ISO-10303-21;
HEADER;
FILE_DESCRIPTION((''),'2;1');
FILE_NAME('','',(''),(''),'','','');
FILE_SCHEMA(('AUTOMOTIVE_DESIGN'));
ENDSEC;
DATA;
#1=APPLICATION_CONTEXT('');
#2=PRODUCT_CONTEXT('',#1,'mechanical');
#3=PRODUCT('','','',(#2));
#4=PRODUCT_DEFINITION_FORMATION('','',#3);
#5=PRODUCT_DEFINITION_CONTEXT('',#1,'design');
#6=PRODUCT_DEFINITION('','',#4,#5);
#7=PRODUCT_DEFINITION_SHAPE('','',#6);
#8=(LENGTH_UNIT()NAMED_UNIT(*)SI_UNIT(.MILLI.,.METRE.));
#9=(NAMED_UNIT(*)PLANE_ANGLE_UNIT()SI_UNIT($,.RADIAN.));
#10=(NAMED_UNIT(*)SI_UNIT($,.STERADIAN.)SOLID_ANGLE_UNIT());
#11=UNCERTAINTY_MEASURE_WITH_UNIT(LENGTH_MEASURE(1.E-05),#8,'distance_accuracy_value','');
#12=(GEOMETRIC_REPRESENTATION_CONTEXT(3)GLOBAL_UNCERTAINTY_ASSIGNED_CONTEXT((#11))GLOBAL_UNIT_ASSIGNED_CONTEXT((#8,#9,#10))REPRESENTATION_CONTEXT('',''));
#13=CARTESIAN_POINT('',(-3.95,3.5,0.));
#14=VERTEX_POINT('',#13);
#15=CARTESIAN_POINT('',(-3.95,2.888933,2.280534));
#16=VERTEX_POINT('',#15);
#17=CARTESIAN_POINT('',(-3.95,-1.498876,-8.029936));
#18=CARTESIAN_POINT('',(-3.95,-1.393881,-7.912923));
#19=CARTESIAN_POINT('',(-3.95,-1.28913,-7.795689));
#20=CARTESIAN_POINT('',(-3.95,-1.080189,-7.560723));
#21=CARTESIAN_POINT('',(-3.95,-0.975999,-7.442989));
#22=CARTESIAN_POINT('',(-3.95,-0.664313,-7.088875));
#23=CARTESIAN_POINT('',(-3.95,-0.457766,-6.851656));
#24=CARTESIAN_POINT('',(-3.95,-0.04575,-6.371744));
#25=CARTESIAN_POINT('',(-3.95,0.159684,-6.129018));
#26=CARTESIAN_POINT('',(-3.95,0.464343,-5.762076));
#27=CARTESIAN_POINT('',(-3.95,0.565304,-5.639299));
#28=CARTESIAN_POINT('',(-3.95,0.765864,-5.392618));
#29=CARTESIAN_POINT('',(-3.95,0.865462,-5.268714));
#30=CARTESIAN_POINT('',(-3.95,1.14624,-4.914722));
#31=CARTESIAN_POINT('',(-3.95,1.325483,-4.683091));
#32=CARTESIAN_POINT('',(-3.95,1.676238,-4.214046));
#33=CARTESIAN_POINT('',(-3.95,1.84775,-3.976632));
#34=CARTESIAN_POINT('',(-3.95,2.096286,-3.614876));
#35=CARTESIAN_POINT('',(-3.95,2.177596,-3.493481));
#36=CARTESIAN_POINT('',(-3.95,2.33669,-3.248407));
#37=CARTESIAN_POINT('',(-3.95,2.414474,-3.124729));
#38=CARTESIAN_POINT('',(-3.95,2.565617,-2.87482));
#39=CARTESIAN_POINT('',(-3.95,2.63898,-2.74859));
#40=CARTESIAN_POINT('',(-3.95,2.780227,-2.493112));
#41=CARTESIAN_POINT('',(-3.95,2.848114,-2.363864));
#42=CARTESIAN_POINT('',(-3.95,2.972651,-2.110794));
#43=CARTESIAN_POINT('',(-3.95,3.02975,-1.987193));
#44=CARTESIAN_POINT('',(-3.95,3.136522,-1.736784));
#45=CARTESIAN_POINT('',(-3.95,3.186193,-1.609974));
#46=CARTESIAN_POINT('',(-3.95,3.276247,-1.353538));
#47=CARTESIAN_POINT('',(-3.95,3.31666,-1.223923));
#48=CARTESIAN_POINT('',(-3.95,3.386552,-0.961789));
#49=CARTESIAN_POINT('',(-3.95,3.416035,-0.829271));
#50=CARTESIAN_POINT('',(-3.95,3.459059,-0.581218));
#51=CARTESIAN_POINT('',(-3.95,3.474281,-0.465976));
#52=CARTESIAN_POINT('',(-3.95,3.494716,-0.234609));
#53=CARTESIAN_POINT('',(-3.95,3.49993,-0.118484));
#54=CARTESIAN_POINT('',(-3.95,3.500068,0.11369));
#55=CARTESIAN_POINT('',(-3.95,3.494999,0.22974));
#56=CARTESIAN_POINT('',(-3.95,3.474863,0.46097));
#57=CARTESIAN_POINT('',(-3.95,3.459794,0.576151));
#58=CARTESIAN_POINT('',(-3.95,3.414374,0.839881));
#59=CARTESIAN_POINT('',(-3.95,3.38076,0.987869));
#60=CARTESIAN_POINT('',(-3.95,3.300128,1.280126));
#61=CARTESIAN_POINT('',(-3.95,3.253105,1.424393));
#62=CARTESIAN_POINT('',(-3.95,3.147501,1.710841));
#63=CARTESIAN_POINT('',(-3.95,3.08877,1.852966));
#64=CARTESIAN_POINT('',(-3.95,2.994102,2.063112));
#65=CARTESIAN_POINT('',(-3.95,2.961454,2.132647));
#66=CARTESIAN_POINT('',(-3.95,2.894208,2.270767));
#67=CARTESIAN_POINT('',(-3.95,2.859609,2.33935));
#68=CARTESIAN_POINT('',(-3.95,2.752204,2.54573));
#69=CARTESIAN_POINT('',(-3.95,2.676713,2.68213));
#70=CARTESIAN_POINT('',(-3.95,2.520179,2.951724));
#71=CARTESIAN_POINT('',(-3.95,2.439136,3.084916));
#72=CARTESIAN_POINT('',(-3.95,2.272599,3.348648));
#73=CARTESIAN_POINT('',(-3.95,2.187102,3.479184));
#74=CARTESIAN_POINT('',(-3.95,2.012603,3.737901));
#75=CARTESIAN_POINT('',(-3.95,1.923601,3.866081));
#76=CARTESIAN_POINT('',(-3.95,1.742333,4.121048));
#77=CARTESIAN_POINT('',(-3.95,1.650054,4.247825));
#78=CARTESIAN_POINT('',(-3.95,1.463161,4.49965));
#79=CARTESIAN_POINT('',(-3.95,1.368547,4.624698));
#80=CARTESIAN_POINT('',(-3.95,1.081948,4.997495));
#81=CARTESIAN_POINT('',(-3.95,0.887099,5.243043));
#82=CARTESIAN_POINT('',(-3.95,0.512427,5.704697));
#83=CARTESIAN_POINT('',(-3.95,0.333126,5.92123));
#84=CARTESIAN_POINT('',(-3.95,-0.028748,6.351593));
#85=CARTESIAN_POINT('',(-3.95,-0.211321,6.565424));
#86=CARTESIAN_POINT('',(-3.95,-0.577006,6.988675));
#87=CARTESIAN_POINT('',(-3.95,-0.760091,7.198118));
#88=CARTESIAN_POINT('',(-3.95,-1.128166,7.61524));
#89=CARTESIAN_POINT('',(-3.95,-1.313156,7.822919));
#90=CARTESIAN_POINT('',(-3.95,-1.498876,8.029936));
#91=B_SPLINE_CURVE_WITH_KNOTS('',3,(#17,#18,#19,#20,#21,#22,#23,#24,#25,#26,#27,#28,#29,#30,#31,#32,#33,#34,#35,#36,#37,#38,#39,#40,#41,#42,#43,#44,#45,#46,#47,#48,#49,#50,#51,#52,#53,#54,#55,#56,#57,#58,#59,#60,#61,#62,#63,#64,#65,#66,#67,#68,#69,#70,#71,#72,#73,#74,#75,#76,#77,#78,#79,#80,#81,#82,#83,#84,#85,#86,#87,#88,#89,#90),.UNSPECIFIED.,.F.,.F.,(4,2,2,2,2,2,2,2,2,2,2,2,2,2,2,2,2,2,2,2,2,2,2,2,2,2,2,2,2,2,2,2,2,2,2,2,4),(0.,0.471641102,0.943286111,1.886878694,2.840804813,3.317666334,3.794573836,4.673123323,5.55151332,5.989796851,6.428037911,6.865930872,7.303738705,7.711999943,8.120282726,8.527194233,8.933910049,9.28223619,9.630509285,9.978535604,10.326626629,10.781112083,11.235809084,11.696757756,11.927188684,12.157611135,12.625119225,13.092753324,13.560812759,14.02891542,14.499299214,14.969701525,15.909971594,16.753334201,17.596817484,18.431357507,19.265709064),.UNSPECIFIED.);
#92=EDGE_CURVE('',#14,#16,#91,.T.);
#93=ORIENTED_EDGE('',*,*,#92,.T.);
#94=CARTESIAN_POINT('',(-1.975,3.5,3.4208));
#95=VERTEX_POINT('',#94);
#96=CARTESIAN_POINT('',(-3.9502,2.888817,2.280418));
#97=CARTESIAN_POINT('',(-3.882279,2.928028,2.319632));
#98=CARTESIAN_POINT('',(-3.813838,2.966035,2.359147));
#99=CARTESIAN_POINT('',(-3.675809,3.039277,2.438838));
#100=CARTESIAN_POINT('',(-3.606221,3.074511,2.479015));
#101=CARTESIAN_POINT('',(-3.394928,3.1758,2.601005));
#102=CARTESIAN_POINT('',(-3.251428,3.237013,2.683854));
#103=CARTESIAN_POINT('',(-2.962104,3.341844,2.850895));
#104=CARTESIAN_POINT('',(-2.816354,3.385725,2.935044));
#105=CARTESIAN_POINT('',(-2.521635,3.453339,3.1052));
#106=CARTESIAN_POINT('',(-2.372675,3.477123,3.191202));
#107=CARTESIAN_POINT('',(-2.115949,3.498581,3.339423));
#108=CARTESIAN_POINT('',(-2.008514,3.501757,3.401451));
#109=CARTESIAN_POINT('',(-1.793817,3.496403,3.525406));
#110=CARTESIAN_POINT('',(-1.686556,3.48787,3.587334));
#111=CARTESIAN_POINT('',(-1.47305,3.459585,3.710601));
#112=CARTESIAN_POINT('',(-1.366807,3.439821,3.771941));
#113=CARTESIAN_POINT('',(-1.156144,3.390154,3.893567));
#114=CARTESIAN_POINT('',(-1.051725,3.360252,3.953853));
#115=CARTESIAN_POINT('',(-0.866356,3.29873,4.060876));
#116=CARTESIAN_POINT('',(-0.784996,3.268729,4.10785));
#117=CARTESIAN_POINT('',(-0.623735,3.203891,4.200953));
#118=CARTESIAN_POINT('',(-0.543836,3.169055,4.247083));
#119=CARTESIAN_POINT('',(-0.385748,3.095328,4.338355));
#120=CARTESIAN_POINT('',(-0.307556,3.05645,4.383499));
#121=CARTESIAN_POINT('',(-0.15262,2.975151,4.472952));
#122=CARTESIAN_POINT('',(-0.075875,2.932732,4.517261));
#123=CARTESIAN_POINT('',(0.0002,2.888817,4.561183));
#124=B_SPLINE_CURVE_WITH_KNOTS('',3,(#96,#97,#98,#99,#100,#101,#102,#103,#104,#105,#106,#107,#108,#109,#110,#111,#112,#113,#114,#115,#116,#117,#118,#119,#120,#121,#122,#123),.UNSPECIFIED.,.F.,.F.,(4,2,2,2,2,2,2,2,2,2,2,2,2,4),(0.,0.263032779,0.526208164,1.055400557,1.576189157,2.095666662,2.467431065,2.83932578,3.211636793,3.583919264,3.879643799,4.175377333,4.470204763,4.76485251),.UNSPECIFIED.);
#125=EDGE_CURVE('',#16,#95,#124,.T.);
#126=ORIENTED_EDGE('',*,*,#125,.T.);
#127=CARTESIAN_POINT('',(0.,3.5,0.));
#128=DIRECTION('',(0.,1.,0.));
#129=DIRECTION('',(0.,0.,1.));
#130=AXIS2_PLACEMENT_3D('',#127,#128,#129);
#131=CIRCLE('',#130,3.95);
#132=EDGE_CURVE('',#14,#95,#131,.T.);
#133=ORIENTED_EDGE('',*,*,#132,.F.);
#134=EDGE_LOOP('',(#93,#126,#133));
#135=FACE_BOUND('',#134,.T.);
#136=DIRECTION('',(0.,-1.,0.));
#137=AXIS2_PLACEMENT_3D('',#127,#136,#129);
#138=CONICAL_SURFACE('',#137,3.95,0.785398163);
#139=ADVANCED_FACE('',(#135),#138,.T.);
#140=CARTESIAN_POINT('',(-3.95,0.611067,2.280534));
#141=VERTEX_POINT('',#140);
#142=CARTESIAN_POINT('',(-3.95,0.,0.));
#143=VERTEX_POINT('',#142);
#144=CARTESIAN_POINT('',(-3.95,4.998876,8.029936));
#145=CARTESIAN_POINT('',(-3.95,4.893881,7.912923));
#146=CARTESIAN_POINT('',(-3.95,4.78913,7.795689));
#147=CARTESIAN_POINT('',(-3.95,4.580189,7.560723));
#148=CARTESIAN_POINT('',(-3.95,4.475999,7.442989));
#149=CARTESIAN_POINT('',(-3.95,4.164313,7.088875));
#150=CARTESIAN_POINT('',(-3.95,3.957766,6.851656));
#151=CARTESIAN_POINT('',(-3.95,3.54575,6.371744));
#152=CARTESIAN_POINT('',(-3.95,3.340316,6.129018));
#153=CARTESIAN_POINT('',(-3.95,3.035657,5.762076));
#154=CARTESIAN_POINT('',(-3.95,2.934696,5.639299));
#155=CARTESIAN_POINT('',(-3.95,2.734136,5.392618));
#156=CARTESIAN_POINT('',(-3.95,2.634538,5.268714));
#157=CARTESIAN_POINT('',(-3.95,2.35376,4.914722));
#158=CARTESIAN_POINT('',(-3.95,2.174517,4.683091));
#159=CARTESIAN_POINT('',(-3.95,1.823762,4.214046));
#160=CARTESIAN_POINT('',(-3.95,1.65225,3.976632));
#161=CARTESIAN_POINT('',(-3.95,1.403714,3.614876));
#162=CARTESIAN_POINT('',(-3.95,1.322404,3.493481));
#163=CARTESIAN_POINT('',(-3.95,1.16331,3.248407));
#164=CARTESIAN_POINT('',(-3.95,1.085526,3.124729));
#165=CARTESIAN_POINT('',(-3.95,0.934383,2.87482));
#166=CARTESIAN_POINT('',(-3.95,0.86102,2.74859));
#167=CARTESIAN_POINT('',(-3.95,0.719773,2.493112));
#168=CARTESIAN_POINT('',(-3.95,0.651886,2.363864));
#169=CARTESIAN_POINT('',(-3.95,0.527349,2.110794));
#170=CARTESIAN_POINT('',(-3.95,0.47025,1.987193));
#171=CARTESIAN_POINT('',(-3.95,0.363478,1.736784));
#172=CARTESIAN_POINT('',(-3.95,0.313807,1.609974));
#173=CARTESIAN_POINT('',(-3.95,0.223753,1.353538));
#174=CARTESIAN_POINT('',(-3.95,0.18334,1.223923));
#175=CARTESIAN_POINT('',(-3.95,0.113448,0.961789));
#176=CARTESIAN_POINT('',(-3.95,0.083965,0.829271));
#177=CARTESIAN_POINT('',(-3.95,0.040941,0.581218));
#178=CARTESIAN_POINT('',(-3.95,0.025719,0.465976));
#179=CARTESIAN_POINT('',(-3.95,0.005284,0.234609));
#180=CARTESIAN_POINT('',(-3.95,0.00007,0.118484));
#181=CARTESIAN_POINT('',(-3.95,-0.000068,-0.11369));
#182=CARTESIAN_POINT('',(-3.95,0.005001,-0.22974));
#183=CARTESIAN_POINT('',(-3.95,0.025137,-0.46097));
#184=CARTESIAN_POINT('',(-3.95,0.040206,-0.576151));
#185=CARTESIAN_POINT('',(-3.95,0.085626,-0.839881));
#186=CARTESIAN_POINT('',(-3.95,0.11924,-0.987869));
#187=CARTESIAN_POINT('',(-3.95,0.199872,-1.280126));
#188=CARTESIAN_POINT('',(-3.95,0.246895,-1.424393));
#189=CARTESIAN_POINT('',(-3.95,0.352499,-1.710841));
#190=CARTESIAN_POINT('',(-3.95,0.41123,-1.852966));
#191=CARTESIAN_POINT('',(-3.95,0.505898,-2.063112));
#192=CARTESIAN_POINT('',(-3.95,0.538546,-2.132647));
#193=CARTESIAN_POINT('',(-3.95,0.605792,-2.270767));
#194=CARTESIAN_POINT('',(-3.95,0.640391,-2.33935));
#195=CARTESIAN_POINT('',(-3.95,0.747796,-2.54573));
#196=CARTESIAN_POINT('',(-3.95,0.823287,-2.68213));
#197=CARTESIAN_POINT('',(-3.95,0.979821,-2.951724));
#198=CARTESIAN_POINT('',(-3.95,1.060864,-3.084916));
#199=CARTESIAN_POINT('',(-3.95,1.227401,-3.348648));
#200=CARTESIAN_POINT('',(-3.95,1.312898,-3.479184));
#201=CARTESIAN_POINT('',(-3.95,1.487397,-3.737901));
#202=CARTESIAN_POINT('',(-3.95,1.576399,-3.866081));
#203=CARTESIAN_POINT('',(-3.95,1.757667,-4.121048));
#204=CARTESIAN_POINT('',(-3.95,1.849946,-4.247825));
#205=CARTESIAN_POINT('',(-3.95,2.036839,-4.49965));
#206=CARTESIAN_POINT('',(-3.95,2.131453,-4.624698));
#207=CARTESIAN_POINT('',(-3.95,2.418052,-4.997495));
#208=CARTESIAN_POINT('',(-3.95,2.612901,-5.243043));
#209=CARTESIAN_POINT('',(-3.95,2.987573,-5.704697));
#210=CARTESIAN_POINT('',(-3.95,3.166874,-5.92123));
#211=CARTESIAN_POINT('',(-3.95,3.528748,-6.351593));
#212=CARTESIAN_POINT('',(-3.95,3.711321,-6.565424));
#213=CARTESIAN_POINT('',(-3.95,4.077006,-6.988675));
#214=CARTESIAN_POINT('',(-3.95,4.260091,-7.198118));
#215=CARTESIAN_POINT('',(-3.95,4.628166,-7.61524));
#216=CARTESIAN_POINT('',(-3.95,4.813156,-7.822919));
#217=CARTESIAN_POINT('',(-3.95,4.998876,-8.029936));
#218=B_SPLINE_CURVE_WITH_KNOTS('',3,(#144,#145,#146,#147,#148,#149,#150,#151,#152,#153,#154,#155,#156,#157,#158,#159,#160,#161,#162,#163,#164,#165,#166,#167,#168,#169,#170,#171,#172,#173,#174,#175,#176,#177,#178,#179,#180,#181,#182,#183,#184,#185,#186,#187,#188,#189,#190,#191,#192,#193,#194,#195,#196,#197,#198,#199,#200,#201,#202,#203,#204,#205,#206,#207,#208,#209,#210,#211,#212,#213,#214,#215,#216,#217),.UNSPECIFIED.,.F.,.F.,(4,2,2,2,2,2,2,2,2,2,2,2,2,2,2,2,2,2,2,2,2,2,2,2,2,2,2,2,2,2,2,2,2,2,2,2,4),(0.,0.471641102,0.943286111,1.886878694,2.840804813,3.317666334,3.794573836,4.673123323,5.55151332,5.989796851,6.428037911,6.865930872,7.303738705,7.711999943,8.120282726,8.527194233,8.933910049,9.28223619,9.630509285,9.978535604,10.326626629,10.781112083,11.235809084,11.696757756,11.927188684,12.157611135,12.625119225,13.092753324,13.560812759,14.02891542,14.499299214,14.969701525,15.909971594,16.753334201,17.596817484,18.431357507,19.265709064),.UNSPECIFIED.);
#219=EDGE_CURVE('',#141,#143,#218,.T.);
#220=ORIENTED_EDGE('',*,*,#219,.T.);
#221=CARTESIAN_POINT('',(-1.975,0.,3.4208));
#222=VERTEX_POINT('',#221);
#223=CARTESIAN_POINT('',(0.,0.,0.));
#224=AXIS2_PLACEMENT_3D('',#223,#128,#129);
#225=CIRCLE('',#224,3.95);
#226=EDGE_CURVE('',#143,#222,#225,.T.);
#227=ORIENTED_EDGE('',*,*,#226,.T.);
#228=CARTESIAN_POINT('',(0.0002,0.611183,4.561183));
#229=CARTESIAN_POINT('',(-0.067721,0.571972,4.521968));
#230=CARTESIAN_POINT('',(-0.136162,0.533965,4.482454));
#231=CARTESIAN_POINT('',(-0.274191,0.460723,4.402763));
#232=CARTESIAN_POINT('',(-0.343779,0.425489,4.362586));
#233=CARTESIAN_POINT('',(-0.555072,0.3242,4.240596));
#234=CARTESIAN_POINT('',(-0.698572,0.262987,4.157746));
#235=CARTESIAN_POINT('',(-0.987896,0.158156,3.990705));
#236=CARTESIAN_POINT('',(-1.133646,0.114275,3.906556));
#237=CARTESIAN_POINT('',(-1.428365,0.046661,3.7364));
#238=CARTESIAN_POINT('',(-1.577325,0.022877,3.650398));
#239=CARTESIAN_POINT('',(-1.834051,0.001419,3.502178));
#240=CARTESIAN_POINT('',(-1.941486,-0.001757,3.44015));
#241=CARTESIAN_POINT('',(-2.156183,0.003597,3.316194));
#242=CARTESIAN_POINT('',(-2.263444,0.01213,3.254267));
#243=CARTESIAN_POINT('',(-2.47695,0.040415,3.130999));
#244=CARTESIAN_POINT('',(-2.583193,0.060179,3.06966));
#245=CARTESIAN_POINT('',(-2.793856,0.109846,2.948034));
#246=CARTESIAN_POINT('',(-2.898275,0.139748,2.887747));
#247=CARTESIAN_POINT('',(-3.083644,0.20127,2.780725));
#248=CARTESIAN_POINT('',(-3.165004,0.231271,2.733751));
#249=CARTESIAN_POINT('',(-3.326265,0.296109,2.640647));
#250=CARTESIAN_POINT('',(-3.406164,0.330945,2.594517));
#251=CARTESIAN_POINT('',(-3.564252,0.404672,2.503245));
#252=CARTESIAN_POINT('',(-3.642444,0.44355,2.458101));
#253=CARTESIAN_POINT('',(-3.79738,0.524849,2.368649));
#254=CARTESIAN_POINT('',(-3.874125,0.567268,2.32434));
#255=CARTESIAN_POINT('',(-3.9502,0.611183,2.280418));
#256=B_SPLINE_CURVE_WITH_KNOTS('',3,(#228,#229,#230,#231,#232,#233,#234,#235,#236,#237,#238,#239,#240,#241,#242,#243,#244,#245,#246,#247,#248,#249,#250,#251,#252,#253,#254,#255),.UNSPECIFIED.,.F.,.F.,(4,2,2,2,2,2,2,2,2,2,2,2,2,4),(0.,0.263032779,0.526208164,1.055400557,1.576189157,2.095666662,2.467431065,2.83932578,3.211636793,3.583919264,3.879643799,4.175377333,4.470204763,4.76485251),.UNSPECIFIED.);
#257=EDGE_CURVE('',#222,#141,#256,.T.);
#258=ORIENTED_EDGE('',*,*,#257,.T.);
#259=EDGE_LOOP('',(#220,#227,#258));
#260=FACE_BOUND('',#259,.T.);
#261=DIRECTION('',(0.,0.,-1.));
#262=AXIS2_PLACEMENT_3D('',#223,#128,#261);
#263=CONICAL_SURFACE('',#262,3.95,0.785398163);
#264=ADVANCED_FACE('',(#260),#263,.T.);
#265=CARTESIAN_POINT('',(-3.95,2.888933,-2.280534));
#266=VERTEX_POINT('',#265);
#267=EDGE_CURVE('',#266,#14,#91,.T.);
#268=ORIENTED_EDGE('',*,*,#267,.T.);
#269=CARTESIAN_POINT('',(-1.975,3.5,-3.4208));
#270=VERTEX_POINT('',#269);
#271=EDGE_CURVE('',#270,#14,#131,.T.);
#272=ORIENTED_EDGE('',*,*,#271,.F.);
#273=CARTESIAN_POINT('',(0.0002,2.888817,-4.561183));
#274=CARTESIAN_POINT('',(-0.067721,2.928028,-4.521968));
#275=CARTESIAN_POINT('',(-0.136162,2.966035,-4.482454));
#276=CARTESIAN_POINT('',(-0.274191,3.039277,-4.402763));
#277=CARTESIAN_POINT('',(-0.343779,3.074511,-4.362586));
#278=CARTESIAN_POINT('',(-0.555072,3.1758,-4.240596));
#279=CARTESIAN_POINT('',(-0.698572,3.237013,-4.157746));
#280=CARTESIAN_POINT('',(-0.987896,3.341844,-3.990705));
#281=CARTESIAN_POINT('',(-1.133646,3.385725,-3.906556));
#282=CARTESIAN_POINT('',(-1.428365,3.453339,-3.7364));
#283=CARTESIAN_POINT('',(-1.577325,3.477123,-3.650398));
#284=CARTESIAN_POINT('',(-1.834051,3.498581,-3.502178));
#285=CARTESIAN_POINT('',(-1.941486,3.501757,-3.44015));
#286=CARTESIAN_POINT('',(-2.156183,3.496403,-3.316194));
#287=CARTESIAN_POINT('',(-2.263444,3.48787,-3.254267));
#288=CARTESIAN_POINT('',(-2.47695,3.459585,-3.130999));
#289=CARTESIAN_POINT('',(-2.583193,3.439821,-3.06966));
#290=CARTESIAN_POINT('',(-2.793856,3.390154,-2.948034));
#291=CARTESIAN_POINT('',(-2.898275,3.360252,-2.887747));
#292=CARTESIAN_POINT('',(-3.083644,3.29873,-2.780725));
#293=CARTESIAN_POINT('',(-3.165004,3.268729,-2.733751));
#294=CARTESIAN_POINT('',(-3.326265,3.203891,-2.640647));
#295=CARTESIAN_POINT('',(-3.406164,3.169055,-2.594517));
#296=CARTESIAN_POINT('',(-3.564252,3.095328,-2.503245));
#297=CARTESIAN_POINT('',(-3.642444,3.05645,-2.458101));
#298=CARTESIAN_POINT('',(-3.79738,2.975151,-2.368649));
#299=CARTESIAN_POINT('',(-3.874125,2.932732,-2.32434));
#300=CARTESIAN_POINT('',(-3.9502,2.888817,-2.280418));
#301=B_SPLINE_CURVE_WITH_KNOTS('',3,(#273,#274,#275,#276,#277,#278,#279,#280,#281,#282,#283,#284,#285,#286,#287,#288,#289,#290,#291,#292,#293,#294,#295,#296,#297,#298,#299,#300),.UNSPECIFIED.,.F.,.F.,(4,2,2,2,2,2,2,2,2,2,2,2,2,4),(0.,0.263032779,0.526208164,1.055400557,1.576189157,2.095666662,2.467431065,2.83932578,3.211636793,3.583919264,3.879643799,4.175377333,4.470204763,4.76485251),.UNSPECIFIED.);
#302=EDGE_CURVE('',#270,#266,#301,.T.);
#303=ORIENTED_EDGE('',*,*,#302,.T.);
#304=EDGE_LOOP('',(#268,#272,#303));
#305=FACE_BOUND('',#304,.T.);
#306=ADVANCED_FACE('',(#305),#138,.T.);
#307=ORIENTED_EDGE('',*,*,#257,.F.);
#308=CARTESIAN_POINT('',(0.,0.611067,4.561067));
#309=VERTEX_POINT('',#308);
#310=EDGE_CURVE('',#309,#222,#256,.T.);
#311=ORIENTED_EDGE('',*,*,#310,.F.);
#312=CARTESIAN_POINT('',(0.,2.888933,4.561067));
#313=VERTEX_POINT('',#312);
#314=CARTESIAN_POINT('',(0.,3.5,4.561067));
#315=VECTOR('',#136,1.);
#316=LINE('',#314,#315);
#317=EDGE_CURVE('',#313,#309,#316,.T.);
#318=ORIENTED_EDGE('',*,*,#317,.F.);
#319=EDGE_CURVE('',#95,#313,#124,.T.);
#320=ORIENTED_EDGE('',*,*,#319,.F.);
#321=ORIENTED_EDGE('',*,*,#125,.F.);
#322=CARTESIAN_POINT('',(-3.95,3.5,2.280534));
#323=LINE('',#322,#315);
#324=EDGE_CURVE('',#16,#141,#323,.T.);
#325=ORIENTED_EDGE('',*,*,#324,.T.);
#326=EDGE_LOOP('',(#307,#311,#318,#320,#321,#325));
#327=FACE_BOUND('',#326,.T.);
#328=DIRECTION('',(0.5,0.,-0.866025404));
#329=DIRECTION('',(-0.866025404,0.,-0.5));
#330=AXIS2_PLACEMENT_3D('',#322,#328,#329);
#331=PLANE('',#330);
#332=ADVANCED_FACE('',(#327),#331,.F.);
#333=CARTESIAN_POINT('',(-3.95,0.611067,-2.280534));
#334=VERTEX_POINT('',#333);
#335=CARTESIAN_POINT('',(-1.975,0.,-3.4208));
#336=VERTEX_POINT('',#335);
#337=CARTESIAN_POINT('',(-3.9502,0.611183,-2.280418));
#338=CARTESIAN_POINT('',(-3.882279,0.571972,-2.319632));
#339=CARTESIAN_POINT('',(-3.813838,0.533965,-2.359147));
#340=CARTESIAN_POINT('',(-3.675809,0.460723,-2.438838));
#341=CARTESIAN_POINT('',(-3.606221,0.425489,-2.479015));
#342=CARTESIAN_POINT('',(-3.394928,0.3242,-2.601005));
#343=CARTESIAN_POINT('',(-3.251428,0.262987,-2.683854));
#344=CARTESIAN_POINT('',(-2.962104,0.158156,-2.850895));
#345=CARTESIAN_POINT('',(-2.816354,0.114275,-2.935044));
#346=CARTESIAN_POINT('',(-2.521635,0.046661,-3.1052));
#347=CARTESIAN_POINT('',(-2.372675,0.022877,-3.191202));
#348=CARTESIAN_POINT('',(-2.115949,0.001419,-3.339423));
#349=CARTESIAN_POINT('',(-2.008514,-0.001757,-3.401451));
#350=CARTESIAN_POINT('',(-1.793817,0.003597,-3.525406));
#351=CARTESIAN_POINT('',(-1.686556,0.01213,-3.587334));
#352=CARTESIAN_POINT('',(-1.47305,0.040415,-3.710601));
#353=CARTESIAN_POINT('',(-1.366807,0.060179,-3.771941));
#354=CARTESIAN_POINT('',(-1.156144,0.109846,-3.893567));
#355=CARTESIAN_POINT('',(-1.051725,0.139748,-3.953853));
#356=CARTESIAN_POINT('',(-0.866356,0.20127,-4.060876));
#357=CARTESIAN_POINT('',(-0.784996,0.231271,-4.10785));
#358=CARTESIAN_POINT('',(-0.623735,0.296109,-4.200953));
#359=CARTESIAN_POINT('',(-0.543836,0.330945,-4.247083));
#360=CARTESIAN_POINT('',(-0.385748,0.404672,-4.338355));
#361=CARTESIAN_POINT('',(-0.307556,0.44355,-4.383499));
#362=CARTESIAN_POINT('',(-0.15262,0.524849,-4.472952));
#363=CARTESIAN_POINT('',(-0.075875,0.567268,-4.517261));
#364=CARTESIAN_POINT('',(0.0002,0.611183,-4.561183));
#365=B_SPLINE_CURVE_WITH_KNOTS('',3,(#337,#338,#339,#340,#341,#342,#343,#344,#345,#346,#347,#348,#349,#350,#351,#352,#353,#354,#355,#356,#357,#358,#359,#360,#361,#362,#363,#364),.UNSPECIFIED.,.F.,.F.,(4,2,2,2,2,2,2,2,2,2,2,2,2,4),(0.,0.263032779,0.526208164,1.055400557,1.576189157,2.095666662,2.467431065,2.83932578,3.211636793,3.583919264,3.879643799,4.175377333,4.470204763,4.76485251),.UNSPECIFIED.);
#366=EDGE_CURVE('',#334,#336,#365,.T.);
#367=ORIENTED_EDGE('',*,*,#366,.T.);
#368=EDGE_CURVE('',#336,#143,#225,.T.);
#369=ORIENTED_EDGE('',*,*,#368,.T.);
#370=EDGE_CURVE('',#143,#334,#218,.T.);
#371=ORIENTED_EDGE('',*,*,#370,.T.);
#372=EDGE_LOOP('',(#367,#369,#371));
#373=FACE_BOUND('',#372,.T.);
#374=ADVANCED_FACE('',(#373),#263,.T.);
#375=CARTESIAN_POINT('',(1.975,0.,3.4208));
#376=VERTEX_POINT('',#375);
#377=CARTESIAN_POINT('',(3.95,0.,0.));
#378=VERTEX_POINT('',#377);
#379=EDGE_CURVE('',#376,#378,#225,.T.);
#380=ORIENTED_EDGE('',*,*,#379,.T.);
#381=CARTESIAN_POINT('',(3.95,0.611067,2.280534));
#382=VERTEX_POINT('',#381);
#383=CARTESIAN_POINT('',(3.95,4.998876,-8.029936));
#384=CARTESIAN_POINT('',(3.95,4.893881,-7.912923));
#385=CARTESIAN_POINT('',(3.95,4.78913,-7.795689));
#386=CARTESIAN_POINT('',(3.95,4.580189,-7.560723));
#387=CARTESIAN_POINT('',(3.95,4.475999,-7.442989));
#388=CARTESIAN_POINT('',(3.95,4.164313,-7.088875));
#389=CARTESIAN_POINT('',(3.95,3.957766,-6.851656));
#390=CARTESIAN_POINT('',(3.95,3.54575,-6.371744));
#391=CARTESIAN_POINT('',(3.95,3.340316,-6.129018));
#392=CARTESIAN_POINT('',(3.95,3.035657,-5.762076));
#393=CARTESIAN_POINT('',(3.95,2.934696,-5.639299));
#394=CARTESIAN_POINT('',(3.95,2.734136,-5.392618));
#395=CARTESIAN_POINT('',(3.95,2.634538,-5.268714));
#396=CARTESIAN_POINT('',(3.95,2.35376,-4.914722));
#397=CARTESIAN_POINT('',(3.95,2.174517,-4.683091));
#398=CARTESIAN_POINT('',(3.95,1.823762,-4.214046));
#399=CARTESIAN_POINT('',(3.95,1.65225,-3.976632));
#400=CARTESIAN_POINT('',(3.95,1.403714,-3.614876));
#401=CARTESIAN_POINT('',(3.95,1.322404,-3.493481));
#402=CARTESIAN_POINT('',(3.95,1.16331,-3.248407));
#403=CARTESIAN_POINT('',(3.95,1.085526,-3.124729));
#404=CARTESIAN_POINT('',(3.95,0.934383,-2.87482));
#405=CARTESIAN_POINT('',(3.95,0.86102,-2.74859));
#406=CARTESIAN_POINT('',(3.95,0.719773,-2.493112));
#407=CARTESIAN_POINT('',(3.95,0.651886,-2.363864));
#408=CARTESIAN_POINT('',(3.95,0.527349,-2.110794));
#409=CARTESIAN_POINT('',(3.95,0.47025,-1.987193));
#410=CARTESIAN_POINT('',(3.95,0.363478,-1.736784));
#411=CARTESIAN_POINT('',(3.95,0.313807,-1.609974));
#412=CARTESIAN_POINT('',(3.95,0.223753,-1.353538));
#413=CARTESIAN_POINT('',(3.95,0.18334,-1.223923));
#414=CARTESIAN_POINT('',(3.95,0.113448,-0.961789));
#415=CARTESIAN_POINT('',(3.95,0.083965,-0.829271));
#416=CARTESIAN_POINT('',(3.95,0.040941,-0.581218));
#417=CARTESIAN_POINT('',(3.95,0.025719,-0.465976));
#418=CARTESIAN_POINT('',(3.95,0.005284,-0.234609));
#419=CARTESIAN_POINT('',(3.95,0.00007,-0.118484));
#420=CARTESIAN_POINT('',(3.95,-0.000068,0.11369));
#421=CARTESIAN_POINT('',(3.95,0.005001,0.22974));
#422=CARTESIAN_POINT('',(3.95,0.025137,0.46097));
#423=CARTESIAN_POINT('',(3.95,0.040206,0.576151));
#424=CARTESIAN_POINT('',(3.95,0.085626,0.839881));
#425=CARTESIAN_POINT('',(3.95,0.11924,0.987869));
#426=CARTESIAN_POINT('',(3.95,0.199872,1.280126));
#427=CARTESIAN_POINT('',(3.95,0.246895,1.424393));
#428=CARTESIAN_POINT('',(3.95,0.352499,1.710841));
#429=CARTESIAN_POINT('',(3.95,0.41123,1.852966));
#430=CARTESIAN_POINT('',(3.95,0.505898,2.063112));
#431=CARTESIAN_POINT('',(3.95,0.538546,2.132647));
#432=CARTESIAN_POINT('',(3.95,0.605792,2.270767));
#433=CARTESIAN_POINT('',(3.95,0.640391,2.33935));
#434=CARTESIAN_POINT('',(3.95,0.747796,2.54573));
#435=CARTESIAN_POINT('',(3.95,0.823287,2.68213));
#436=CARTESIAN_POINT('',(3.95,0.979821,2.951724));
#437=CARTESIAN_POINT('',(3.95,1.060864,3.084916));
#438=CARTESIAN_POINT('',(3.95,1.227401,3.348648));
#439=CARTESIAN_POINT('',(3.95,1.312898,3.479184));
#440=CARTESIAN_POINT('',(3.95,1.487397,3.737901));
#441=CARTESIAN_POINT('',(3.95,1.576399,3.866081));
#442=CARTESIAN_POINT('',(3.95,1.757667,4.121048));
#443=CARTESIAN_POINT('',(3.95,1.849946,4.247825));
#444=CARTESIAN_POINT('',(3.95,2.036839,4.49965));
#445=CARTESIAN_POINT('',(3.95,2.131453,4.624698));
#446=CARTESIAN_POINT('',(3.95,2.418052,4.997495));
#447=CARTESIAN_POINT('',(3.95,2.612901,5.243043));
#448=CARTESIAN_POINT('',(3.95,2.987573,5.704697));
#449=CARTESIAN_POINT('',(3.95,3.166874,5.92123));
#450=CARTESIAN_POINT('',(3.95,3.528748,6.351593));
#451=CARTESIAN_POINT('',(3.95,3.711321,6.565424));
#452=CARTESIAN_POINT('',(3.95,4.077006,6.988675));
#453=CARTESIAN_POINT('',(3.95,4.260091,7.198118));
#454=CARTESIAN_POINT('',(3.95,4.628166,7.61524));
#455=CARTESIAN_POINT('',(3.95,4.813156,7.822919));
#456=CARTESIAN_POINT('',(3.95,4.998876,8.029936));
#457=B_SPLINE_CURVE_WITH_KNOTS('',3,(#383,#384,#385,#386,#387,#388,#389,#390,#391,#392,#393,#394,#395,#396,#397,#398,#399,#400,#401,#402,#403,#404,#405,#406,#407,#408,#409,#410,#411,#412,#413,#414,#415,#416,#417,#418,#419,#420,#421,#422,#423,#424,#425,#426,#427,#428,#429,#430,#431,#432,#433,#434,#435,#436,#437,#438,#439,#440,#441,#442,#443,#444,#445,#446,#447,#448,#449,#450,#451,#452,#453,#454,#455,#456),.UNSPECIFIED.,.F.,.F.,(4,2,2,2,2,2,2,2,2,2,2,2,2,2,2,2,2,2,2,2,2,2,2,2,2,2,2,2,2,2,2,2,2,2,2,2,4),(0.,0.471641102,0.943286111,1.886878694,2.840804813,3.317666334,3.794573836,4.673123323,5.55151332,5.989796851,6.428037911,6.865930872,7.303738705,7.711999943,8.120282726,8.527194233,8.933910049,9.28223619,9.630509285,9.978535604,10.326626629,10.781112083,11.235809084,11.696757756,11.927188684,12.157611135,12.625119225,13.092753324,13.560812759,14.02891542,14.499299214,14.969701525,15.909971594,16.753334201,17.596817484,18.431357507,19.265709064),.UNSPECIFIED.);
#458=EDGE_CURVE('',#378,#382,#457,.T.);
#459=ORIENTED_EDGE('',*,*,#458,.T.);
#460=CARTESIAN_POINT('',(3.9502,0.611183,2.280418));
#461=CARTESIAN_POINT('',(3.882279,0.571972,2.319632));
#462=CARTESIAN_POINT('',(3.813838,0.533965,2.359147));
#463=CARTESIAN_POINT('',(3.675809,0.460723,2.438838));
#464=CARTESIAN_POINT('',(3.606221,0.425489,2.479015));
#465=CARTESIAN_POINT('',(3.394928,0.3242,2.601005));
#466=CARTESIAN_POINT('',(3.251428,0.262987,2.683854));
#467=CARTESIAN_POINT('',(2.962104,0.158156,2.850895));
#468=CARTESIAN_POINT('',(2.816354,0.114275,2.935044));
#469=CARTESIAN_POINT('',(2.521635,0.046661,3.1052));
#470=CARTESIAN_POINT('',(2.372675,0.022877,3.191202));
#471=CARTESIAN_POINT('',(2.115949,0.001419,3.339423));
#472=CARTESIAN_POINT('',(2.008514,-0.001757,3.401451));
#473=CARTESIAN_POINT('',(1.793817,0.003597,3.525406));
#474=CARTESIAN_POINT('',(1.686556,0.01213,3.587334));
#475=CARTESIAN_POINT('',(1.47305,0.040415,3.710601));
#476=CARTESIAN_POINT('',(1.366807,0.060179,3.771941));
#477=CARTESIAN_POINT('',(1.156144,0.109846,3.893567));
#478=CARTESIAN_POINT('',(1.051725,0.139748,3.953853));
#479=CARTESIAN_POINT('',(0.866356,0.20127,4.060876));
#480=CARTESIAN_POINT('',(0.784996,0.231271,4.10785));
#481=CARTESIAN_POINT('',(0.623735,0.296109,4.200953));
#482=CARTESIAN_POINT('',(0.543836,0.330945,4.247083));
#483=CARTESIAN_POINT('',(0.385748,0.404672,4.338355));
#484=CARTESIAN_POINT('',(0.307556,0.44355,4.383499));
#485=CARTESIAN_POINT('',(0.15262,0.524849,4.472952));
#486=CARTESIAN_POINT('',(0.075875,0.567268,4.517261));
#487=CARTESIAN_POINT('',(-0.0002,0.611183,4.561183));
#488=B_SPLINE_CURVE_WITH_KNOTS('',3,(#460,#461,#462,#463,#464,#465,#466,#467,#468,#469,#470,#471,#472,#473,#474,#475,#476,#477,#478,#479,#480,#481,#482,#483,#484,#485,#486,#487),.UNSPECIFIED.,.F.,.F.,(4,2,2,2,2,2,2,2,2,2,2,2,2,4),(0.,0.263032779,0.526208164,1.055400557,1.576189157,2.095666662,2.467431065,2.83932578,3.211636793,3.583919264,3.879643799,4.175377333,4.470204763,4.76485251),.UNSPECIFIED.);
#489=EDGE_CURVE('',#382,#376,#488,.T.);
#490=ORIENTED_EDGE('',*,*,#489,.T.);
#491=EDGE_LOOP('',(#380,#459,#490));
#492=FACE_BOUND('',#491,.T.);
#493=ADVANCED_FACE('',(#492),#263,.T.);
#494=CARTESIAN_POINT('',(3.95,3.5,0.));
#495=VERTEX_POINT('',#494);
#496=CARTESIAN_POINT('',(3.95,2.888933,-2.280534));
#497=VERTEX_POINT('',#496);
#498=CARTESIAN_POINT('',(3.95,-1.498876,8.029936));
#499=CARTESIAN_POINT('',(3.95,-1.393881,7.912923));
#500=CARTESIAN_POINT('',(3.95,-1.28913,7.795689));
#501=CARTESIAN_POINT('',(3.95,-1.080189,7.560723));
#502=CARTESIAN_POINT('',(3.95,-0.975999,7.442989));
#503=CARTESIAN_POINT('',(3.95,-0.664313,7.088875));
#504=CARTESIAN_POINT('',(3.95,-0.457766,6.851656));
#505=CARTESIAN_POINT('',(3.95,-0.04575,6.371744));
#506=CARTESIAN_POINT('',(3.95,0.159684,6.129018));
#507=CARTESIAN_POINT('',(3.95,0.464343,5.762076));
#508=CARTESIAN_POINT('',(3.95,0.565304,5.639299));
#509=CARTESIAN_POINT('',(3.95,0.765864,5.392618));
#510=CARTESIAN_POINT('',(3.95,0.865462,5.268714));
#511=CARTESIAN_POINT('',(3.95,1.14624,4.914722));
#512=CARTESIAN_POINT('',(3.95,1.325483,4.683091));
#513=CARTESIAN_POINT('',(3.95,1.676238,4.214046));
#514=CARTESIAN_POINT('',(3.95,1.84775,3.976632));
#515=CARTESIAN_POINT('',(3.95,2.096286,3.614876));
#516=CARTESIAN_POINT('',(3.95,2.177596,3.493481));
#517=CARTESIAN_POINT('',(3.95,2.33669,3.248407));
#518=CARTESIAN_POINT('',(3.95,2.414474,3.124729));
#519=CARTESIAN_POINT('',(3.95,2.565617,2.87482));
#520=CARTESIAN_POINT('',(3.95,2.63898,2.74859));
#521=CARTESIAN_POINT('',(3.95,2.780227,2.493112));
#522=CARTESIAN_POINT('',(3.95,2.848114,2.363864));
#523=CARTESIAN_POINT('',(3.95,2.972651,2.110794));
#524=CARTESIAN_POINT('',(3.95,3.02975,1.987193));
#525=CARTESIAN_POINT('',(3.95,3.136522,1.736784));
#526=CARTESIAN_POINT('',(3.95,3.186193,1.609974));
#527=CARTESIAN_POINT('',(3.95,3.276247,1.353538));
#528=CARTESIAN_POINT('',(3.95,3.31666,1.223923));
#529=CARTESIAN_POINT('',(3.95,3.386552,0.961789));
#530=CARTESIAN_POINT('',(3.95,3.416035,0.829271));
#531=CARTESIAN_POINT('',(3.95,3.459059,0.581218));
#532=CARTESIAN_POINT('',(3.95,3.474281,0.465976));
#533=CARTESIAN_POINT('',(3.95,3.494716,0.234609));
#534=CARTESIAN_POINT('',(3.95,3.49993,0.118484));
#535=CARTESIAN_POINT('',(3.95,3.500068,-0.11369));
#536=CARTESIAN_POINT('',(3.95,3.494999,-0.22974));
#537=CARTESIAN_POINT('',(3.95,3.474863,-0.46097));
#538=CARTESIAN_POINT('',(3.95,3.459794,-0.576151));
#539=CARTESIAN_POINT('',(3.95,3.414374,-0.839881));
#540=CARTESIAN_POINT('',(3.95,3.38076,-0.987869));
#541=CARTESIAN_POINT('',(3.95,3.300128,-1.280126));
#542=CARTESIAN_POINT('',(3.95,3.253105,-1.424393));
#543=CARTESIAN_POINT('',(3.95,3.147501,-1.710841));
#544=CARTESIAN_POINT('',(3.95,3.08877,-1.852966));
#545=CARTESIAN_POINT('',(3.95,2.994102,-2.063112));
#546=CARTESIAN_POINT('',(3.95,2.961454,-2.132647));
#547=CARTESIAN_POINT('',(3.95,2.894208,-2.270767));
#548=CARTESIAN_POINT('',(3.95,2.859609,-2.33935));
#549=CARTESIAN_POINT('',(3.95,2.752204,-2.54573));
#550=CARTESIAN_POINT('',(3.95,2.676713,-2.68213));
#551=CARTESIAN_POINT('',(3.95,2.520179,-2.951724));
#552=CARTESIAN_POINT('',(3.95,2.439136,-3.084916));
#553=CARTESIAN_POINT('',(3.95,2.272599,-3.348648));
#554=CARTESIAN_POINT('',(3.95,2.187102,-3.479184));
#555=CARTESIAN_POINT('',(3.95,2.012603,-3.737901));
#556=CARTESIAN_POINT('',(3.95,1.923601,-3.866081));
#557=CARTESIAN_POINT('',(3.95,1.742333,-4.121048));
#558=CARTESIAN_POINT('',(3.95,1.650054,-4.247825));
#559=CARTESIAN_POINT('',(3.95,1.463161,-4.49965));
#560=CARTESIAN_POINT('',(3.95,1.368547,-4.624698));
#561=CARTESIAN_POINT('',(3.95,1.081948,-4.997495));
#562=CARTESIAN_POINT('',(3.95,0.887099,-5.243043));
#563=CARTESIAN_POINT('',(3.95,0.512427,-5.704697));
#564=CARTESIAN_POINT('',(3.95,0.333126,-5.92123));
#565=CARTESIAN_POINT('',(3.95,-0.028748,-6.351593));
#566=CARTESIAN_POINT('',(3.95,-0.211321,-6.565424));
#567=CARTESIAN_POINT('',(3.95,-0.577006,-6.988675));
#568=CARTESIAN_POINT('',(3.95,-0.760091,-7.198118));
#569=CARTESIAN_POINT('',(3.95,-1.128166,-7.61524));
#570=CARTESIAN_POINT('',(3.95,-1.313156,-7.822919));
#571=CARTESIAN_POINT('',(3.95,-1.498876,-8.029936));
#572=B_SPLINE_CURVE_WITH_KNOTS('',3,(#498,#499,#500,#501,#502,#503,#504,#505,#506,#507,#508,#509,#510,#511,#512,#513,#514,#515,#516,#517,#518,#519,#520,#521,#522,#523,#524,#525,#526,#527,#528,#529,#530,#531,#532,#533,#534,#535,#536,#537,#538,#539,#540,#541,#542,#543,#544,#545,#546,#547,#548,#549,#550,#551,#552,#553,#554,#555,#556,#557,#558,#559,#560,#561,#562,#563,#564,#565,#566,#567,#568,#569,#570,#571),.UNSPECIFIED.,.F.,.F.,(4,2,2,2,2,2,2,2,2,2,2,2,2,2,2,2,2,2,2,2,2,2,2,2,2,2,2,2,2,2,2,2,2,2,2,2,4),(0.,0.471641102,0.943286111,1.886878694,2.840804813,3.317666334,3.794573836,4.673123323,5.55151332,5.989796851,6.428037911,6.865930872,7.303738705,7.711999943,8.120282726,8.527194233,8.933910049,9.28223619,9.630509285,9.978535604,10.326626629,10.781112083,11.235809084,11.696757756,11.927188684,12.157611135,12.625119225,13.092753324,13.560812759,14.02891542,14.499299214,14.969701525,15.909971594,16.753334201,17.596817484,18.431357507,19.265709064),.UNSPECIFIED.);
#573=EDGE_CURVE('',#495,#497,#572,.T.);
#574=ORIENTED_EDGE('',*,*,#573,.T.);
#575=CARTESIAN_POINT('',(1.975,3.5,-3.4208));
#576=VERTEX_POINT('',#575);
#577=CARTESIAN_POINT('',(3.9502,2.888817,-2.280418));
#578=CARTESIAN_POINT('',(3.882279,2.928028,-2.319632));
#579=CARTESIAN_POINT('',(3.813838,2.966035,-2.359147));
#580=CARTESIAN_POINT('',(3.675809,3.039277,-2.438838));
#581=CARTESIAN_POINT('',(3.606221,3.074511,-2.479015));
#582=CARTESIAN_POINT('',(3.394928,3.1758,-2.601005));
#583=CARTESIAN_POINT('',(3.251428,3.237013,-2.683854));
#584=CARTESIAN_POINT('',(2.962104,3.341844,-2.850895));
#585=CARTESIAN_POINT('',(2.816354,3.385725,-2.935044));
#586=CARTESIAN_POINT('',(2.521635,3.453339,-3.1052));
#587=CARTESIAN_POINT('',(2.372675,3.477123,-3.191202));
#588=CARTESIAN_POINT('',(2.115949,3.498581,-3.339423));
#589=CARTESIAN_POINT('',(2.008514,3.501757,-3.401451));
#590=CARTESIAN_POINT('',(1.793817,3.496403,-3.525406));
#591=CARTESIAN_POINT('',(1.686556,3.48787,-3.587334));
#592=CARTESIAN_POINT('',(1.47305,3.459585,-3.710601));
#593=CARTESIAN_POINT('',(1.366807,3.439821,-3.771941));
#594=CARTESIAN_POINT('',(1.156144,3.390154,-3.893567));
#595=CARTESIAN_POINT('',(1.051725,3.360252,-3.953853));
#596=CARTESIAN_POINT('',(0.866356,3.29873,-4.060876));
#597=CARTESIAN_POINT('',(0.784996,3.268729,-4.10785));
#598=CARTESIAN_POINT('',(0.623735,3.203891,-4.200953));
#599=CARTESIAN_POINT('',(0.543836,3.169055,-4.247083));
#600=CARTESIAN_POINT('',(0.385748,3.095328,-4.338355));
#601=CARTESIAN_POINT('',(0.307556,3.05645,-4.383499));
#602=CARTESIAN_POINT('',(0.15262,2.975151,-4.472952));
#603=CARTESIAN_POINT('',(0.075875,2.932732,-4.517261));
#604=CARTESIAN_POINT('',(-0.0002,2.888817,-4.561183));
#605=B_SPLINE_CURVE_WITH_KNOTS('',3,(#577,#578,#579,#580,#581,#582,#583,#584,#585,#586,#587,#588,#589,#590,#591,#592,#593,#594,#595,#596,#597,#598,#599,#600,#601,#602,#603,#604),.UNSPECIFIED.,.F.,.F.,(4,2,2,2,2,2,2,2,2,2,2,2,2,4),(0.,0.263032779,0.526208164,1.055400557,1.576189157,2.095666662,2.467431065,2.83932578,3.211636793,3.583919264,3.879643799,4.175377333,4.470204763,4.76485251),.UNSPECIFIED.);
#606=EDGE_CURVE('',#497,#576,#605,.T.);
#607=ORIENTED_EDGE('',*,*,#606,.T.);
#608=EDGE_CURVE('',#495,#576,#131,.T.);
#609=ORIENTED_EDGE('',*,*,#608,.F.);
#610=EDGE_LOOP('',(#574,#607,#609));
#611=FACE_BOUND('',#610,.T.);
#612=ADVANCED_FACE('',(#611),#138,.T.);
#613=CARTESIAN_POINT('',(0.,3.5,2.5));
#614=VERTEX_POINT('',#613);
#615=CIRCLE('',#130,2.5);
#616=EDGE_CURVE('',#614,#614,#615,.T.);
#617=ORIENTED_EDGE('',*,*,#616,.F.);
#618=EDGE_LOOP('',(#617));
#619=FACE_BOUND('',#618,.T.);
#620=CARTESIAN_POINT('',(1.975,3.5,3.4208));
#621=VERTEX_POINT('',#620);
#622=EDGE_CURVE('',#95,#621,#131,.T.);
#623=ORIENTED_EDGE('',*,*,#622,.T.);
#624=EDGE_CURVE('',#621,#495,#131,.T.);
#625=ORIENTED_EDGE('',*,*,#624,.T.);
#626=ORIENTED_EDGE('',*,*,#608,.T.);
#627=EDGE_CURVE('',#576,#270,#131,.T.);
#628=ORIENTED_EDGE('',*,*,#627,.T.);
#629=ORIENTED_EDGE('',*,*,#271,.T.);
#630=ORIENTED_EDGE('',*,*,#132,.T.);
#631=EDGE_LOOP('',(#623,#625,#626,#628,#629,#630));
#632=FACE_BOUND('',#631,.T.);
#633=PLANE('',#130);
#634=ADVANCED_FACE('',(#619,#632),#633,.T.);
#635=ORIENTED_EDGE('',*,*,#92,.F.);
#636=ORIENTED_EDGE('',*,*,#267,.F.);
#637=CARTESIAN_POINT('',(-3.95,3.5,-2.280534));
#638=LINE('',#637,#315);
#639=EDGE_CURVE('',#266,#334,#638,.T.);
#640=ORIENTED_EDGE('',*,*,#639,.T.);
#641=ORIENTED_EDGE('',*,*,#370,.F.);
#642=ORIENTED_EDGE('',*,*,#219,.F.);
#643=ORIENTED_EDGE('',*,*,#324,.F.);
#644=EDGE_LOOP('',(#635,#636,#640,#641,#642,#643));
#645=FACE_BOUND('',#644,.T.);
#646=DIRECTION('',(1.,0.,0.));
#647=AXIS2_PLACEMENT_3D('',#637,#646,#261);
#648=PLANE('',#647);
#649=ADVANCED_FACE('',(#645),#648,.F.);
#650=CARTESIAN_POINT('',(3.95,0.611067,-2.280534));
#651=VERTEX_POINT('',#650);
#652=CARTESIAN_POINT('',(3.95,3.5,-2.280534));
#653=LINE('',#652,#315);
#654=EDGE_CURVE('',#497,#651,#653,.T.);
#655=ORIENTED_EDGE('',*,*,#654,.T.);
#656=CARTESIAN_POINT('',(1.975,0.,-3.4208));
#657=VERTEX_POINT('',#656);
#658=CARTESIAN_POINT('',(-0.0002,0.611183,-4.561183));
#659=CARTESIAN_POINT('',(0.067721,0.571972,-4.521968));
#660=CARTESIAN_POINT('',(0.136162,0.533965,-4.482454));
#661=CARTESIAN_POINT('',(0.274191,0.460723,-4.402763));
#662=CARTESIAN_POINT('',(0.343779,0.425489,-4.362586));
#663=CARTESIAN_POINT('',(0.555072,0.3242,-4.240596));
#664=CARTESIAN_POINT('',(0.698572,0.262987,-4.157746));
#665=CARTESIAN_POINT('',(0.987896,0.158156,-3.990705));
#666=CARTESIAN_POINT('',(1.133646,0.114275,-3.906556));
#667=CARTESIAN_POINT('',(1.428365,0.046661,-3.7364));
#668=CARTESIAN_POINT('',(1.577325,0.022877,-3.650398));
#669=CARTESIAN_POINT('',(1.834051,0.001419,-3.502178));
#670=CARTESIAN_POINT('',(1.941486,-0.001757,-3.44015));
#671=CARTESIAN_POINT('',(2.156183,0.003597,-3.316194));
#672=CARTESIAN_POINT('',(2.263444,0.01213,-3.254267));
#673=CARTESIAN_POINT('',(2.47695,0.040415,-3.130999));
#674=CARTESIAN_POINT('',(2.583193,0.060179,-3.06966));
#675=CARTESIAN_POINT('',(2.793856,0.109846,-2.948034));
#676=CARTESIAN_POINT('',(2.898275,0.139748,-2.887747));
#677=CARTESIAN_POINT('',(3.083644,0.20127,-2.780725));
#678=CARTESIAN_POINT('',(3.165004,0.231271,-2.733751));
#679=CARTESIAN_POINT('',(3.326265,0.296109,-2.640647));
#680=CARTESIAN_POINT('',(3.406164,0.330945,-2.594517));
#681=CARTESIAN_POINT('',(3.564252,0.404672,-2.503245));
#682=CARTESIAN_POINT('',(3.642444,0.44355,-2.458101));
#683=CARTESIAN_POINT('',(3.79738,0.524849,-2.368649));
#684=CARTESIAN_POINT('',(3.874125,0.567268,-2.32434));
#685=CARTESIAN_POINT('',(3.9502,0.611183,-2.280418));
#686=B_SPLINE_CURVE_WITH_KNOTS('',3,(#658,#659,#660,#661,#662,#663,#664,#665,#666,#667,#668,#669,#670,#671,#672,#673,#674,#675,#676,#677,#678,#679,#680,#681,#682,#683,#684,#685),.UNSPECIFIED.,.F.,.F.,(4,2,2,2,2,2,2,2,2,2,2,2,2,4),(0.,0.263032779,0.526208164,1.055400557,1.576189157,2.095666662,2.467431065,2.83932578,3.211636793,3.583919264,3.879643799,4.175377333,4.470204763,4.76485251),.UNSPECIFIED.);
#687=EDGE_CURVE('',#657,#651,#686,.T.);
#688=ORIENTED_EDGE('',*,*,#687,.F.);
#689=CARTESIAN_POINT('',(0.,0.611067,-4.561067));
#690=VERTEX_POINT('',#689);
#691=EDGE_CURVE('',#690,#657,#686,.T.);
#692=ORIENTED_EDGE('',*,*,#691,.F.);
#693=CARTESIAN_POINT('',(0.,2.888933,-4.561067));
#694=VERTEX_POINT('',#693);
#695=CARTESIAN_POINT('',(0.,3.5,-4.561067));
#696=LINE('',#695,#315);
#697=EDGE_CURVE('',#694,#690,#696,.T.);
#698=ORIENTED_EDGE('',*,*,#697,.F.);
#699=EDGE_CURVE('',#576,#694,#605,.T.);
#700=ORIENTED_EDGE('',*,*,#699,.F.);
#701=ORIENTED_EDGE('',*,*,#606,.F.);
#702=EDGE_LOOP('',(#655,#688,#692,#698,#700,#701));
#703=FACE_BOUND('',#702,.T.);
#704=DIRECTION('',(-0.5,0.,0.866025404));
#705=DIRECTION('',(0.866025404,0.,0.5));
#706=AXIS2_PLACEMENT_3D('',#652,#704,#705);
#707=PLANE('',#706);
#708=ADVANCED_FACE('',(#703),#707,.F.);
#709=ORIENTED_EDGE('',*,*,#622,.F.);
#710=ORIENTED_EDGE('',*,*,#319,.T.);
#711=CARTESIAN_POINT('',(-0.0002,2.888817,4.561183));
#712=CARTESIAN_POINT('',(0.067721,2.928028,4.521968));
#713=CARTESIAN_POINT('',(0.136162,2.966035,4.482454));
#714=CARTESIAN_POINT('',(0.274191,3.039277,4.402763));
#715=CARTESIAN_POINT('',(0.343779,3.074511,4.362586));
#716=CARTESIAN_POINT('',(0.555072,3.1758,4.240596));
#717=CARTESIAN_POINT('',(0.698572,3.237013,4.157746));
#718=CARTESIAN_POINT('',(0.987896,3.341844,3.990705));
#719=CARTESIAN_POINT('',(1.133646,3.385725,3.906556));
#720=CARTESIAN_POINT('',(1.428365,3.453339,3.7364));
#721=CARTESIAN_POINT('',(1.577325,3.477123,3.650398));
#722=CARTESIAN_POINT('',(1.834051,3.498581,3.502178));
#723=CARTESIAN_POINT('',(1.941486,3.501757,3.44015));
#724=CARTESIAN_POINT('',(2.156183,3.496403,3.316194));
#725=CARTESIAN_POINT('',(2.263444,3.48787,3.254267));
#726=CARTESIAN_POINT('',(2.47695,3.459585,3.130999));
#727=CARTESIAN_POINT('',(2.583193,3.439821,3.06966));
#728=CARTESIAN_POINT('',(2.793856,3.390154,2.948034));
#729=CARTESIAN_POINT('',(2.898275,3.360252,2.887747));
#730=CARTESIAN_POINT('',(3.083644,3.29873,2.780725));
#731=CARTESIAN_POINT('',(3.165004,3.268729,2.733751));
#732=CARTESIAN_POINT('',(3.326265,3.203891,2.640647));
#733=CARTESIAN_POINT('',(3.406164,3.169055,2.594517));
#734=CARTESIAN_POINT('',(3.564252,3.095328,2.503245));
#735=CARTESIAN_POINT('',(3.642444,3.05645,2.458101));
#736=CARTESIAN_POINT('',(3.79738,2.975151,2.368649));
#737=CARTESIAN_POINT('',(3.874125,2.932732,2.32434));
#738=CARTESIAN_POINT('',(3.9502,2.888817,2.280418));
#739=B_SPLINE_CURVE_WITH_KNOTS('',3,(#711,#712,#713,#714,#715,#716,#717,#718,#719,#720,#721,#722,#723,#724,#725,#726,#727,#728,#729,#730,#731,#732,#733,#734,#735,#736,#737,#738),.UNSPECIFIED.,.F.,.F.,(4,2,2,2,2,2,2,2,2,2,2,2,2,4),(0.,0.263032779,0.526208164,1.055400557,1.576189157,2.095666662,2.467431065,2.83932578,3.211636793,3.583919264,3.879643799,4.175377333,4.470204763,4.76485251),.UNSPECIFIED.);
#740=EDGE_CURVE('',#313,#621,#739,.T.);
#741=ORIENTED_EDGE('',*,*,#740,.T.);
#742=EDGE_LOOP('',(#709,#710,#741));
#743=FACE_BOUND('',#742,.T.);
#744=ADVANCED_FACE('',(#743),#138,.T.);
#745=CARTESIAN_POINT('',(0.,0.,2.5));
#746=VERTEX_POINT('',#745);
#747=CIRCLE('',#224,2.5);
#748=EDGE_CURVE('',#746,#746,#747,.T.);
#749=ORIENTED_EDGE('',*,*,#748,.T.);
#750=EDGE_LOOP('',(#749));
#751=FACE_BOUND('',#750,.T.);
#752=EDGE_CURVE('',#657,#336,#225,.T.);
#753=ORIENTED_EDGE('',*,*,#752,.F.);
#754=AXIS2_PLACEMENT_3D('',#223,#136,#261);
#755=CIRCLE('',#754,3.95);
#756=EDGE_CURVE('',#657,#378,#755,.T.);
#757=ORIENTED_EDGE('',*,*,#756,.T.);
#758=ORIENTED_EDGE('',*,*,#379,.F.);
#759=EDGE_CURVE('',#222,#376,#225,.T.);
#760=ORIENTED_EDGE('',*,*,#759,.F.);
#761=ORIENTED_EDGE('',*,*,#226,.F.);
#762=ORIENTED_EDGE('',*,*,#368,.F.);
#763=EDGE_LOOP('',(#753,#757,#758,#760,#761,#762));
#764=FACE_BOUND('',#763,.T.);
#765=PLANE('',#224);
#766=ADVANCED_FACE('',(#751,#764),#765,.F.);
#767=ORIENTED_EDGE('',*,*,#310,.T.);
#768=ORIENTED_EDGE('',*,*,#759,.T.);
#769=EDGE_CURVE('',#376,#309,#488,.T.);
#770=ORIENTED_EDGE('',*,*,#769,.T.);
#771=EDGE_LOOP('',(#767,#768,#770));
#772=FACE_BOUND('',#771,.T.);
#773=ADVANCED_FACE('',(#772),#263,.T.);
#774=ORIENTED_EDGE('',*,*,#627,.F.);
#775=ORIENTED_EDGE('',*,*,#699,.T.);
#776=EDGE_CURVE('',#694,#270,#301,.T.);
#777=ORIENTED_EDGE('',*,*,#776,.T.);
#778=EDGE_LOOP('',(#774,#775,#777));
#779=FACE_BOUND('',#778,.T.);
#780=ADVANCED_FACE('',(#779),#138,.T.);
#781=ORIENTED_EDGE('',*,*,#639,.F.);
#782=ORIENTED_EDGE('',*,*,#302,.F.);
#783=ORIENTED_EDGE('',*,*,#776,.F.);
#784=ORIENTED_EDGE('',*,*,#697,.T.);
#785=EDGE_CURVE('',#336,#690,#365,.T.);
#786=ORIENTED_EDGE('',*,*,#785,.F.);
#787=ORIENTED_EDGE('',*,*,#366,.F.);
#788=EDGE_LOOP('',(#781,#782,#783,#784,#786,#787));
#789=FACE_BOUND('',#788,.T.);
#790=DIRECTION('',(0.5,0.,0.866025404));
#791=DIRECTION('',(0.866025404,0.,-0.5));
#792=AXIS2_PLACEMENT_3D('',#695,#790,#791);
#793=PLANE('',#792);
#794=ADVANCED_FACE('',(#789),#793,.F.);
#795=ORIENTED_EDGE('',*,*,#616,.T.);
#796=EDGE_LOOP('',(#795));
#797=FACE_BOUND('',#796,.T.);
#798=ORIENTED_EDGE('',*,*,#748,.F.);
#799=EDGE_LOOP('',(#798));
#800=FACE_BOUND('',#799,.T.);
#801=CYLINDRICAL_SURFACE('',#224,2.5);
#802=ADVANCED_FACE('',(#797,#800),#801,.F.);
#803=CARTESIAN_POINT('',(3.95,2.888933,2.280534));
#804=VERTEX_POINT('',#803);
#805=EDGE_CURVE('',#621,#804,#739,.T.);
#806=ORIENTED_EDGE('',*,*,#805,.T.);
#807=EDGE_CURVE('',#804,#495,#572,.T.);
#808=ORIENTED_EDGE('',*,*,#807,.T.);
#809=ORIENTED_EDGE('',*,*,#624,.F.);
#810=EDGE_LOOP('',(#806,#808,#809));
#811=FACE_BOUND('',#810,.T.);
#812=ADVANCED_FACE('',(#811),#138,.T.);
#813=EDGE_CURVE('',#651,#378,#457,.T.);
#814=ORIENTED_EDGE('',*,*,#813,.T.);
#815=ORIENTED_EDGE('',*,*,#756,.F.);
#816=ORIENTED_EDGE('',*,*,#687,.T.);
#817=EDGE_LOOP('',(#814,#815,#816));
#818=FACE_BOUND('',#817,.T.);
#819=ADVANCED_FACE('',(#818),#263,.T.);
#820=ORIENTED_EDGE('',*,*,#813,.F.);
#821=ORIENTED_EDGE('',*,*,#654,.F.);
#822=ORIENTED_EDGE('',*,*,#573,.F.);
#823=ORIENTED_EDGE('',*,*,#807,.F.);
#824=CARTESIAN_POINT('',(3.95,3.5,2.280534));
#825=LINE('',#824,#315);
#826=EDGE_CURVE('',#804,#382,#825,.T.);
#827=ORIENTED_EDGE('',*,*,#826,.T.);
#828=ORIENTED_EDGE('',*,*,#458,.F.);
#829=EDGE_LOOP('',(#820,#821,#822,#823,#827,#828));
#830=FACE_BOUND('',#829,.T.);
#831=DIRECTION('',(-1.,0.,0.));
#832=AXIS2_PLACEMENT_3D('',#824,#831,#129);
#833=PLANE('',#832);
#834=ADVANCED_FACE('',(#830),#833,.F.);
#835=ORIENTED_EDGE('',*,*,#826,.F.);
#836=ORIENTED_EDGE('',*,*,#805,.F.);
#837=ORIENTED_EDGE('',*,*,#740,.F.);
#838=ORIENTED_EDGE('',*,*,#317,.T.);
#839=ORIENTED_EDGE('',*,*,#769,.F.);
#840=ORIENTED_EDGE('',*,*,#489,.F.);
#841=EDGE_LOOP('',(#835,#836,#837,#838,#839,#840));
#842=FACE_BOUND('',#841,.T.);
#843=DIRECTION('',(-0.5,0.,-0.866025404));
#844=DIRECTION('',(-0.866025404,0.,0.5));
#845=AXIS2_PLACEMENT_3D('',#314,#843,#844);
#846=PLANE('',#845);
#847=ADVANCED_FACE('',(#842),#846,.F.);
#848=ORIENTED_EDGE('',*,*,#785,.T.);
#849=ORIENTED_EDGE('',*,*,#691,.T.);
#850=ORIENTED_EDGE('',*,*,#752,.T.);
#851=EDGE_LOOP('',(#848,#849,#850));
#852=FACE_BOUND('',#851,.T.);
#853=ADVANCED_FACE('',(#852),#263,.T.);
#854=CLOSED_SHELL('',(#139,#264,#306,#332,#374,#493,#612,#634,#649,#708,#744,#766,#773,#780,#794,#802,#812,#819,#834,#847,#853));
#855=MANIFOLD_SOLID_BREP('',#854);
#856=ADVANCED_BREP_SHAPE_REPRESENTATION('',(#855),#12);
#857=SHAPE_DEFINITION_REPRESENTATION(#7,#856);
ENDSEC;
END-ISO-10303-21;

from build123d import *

# Parameters (mm, degrees)
BOSS_EXTRUDE1_DEPTH     = 3.5
CUT_EXTRUDE1_DEPTH      = 7.975373347
CUT_EXTRUDE1_DEPTH_BACK = 7.975373347
SKETCH2_R               = 2.5
SKETCH4_OUTSIDE_W       = 79.412
SKETCH4_OUTSIDE_H       = 80.634
SKETCH4_OUTSIDE_R       = 3.95
CUT_EXTRUDE4_DEPTH      = 33.5
CUT_EXTRUDE4_DRAFT      = -45


# Read off the part's stored shape, not the designer's step: Cut-Extrude2
with BuildPart() as part:
    # Sketch1 → Boss-Extrude1 (new body)
    with BuildSketch(Plane(origin=(0, 0, 0), x_dir=(1, 0, 0), z_dir=(0, 1, 0))):
        Polygon((3.95, -2.280533563), (3.95, 2.280533563), (0, 4.561067127), (-3.95, 2.280533563), (-3.95, -2.280533563), (0, -4.561067127), align=None)
    extrude(amount=BOSS_EXTRUDE1_DEPTH)

    # Sketch2 → Cut-Extrude1 (cut, two sides: drawn at the far end of the back side and taken through both)
    with BuildSketch(Plane(origin=(0, 3.5, 0), x_dir=(1, 0, 0), z_dir=(0, 1, 0)).offset(-CUT_EXTRUDE1_DEPTH_BACK)):
        with Locations(Location((0, 0, 0), (0, 0, 270))):
            Circle(SKETCH2_R)
    extrude(amount=CUT_EXTRUDE1_DEPTH + CUT_EXTRUDE1_DEPTH_BACK, mode=Mode.SUBTRACT)

    # Cut-Extrude2 outline → Cut-Extrude2 (revolve, cut)
    with BuildSketch(Plane.XY):
        Polygon((4.561067183, 3.500000074), (3.949999968, 3.500000074), (4.561067135, 2.888932865), align=None)
    revolve(axis=Axis((0, 0, 0), (0, 1, 0)), mode=Mode.SUBTRACT)


with BuildPart() as cut_extrude4_tool:
    # Sketch4 outside → Cut-Extrude4 (with draft: the straight prism first)
    with BuildSketch(Plane.XZ):
        Rectangle(SKETCH4_OUTSIDE_W, SKETCH4_OUTSIDE_H)
        Circle(SKETCH4_OUTSIDE_R, mode=Mode.SUBTRACT)
    extrude(amount=-CUT_EXTRUDE4_DEPTH)
    # Cut-Extrude4: the draft: its side faces are tilted about the plane it starts from
    cut_extrude4_sides = [cut_extrude4_tool.faces().sort_by_distance(p)[0] for p in [
        (0, 16.75, -40.317),
        (39.706, 16.75, 0),
        (0, 16.75, 40.317),
        (-39.706, 16.75, 0),
        (-3.95, 16.75, 0),
    ]]
    draft(cut_extrude4_sides, Plane.XZ, CUT_EXTRUDE4_DRAFT)


with BuildPart() as part_1:
    add(part.part)

    # Cut-Extrude4: cut by cut_extrude4_tool
    add(cut_extrude4_tool.part, mode=Mode.SUBTRACT)


solid = part_1.part
